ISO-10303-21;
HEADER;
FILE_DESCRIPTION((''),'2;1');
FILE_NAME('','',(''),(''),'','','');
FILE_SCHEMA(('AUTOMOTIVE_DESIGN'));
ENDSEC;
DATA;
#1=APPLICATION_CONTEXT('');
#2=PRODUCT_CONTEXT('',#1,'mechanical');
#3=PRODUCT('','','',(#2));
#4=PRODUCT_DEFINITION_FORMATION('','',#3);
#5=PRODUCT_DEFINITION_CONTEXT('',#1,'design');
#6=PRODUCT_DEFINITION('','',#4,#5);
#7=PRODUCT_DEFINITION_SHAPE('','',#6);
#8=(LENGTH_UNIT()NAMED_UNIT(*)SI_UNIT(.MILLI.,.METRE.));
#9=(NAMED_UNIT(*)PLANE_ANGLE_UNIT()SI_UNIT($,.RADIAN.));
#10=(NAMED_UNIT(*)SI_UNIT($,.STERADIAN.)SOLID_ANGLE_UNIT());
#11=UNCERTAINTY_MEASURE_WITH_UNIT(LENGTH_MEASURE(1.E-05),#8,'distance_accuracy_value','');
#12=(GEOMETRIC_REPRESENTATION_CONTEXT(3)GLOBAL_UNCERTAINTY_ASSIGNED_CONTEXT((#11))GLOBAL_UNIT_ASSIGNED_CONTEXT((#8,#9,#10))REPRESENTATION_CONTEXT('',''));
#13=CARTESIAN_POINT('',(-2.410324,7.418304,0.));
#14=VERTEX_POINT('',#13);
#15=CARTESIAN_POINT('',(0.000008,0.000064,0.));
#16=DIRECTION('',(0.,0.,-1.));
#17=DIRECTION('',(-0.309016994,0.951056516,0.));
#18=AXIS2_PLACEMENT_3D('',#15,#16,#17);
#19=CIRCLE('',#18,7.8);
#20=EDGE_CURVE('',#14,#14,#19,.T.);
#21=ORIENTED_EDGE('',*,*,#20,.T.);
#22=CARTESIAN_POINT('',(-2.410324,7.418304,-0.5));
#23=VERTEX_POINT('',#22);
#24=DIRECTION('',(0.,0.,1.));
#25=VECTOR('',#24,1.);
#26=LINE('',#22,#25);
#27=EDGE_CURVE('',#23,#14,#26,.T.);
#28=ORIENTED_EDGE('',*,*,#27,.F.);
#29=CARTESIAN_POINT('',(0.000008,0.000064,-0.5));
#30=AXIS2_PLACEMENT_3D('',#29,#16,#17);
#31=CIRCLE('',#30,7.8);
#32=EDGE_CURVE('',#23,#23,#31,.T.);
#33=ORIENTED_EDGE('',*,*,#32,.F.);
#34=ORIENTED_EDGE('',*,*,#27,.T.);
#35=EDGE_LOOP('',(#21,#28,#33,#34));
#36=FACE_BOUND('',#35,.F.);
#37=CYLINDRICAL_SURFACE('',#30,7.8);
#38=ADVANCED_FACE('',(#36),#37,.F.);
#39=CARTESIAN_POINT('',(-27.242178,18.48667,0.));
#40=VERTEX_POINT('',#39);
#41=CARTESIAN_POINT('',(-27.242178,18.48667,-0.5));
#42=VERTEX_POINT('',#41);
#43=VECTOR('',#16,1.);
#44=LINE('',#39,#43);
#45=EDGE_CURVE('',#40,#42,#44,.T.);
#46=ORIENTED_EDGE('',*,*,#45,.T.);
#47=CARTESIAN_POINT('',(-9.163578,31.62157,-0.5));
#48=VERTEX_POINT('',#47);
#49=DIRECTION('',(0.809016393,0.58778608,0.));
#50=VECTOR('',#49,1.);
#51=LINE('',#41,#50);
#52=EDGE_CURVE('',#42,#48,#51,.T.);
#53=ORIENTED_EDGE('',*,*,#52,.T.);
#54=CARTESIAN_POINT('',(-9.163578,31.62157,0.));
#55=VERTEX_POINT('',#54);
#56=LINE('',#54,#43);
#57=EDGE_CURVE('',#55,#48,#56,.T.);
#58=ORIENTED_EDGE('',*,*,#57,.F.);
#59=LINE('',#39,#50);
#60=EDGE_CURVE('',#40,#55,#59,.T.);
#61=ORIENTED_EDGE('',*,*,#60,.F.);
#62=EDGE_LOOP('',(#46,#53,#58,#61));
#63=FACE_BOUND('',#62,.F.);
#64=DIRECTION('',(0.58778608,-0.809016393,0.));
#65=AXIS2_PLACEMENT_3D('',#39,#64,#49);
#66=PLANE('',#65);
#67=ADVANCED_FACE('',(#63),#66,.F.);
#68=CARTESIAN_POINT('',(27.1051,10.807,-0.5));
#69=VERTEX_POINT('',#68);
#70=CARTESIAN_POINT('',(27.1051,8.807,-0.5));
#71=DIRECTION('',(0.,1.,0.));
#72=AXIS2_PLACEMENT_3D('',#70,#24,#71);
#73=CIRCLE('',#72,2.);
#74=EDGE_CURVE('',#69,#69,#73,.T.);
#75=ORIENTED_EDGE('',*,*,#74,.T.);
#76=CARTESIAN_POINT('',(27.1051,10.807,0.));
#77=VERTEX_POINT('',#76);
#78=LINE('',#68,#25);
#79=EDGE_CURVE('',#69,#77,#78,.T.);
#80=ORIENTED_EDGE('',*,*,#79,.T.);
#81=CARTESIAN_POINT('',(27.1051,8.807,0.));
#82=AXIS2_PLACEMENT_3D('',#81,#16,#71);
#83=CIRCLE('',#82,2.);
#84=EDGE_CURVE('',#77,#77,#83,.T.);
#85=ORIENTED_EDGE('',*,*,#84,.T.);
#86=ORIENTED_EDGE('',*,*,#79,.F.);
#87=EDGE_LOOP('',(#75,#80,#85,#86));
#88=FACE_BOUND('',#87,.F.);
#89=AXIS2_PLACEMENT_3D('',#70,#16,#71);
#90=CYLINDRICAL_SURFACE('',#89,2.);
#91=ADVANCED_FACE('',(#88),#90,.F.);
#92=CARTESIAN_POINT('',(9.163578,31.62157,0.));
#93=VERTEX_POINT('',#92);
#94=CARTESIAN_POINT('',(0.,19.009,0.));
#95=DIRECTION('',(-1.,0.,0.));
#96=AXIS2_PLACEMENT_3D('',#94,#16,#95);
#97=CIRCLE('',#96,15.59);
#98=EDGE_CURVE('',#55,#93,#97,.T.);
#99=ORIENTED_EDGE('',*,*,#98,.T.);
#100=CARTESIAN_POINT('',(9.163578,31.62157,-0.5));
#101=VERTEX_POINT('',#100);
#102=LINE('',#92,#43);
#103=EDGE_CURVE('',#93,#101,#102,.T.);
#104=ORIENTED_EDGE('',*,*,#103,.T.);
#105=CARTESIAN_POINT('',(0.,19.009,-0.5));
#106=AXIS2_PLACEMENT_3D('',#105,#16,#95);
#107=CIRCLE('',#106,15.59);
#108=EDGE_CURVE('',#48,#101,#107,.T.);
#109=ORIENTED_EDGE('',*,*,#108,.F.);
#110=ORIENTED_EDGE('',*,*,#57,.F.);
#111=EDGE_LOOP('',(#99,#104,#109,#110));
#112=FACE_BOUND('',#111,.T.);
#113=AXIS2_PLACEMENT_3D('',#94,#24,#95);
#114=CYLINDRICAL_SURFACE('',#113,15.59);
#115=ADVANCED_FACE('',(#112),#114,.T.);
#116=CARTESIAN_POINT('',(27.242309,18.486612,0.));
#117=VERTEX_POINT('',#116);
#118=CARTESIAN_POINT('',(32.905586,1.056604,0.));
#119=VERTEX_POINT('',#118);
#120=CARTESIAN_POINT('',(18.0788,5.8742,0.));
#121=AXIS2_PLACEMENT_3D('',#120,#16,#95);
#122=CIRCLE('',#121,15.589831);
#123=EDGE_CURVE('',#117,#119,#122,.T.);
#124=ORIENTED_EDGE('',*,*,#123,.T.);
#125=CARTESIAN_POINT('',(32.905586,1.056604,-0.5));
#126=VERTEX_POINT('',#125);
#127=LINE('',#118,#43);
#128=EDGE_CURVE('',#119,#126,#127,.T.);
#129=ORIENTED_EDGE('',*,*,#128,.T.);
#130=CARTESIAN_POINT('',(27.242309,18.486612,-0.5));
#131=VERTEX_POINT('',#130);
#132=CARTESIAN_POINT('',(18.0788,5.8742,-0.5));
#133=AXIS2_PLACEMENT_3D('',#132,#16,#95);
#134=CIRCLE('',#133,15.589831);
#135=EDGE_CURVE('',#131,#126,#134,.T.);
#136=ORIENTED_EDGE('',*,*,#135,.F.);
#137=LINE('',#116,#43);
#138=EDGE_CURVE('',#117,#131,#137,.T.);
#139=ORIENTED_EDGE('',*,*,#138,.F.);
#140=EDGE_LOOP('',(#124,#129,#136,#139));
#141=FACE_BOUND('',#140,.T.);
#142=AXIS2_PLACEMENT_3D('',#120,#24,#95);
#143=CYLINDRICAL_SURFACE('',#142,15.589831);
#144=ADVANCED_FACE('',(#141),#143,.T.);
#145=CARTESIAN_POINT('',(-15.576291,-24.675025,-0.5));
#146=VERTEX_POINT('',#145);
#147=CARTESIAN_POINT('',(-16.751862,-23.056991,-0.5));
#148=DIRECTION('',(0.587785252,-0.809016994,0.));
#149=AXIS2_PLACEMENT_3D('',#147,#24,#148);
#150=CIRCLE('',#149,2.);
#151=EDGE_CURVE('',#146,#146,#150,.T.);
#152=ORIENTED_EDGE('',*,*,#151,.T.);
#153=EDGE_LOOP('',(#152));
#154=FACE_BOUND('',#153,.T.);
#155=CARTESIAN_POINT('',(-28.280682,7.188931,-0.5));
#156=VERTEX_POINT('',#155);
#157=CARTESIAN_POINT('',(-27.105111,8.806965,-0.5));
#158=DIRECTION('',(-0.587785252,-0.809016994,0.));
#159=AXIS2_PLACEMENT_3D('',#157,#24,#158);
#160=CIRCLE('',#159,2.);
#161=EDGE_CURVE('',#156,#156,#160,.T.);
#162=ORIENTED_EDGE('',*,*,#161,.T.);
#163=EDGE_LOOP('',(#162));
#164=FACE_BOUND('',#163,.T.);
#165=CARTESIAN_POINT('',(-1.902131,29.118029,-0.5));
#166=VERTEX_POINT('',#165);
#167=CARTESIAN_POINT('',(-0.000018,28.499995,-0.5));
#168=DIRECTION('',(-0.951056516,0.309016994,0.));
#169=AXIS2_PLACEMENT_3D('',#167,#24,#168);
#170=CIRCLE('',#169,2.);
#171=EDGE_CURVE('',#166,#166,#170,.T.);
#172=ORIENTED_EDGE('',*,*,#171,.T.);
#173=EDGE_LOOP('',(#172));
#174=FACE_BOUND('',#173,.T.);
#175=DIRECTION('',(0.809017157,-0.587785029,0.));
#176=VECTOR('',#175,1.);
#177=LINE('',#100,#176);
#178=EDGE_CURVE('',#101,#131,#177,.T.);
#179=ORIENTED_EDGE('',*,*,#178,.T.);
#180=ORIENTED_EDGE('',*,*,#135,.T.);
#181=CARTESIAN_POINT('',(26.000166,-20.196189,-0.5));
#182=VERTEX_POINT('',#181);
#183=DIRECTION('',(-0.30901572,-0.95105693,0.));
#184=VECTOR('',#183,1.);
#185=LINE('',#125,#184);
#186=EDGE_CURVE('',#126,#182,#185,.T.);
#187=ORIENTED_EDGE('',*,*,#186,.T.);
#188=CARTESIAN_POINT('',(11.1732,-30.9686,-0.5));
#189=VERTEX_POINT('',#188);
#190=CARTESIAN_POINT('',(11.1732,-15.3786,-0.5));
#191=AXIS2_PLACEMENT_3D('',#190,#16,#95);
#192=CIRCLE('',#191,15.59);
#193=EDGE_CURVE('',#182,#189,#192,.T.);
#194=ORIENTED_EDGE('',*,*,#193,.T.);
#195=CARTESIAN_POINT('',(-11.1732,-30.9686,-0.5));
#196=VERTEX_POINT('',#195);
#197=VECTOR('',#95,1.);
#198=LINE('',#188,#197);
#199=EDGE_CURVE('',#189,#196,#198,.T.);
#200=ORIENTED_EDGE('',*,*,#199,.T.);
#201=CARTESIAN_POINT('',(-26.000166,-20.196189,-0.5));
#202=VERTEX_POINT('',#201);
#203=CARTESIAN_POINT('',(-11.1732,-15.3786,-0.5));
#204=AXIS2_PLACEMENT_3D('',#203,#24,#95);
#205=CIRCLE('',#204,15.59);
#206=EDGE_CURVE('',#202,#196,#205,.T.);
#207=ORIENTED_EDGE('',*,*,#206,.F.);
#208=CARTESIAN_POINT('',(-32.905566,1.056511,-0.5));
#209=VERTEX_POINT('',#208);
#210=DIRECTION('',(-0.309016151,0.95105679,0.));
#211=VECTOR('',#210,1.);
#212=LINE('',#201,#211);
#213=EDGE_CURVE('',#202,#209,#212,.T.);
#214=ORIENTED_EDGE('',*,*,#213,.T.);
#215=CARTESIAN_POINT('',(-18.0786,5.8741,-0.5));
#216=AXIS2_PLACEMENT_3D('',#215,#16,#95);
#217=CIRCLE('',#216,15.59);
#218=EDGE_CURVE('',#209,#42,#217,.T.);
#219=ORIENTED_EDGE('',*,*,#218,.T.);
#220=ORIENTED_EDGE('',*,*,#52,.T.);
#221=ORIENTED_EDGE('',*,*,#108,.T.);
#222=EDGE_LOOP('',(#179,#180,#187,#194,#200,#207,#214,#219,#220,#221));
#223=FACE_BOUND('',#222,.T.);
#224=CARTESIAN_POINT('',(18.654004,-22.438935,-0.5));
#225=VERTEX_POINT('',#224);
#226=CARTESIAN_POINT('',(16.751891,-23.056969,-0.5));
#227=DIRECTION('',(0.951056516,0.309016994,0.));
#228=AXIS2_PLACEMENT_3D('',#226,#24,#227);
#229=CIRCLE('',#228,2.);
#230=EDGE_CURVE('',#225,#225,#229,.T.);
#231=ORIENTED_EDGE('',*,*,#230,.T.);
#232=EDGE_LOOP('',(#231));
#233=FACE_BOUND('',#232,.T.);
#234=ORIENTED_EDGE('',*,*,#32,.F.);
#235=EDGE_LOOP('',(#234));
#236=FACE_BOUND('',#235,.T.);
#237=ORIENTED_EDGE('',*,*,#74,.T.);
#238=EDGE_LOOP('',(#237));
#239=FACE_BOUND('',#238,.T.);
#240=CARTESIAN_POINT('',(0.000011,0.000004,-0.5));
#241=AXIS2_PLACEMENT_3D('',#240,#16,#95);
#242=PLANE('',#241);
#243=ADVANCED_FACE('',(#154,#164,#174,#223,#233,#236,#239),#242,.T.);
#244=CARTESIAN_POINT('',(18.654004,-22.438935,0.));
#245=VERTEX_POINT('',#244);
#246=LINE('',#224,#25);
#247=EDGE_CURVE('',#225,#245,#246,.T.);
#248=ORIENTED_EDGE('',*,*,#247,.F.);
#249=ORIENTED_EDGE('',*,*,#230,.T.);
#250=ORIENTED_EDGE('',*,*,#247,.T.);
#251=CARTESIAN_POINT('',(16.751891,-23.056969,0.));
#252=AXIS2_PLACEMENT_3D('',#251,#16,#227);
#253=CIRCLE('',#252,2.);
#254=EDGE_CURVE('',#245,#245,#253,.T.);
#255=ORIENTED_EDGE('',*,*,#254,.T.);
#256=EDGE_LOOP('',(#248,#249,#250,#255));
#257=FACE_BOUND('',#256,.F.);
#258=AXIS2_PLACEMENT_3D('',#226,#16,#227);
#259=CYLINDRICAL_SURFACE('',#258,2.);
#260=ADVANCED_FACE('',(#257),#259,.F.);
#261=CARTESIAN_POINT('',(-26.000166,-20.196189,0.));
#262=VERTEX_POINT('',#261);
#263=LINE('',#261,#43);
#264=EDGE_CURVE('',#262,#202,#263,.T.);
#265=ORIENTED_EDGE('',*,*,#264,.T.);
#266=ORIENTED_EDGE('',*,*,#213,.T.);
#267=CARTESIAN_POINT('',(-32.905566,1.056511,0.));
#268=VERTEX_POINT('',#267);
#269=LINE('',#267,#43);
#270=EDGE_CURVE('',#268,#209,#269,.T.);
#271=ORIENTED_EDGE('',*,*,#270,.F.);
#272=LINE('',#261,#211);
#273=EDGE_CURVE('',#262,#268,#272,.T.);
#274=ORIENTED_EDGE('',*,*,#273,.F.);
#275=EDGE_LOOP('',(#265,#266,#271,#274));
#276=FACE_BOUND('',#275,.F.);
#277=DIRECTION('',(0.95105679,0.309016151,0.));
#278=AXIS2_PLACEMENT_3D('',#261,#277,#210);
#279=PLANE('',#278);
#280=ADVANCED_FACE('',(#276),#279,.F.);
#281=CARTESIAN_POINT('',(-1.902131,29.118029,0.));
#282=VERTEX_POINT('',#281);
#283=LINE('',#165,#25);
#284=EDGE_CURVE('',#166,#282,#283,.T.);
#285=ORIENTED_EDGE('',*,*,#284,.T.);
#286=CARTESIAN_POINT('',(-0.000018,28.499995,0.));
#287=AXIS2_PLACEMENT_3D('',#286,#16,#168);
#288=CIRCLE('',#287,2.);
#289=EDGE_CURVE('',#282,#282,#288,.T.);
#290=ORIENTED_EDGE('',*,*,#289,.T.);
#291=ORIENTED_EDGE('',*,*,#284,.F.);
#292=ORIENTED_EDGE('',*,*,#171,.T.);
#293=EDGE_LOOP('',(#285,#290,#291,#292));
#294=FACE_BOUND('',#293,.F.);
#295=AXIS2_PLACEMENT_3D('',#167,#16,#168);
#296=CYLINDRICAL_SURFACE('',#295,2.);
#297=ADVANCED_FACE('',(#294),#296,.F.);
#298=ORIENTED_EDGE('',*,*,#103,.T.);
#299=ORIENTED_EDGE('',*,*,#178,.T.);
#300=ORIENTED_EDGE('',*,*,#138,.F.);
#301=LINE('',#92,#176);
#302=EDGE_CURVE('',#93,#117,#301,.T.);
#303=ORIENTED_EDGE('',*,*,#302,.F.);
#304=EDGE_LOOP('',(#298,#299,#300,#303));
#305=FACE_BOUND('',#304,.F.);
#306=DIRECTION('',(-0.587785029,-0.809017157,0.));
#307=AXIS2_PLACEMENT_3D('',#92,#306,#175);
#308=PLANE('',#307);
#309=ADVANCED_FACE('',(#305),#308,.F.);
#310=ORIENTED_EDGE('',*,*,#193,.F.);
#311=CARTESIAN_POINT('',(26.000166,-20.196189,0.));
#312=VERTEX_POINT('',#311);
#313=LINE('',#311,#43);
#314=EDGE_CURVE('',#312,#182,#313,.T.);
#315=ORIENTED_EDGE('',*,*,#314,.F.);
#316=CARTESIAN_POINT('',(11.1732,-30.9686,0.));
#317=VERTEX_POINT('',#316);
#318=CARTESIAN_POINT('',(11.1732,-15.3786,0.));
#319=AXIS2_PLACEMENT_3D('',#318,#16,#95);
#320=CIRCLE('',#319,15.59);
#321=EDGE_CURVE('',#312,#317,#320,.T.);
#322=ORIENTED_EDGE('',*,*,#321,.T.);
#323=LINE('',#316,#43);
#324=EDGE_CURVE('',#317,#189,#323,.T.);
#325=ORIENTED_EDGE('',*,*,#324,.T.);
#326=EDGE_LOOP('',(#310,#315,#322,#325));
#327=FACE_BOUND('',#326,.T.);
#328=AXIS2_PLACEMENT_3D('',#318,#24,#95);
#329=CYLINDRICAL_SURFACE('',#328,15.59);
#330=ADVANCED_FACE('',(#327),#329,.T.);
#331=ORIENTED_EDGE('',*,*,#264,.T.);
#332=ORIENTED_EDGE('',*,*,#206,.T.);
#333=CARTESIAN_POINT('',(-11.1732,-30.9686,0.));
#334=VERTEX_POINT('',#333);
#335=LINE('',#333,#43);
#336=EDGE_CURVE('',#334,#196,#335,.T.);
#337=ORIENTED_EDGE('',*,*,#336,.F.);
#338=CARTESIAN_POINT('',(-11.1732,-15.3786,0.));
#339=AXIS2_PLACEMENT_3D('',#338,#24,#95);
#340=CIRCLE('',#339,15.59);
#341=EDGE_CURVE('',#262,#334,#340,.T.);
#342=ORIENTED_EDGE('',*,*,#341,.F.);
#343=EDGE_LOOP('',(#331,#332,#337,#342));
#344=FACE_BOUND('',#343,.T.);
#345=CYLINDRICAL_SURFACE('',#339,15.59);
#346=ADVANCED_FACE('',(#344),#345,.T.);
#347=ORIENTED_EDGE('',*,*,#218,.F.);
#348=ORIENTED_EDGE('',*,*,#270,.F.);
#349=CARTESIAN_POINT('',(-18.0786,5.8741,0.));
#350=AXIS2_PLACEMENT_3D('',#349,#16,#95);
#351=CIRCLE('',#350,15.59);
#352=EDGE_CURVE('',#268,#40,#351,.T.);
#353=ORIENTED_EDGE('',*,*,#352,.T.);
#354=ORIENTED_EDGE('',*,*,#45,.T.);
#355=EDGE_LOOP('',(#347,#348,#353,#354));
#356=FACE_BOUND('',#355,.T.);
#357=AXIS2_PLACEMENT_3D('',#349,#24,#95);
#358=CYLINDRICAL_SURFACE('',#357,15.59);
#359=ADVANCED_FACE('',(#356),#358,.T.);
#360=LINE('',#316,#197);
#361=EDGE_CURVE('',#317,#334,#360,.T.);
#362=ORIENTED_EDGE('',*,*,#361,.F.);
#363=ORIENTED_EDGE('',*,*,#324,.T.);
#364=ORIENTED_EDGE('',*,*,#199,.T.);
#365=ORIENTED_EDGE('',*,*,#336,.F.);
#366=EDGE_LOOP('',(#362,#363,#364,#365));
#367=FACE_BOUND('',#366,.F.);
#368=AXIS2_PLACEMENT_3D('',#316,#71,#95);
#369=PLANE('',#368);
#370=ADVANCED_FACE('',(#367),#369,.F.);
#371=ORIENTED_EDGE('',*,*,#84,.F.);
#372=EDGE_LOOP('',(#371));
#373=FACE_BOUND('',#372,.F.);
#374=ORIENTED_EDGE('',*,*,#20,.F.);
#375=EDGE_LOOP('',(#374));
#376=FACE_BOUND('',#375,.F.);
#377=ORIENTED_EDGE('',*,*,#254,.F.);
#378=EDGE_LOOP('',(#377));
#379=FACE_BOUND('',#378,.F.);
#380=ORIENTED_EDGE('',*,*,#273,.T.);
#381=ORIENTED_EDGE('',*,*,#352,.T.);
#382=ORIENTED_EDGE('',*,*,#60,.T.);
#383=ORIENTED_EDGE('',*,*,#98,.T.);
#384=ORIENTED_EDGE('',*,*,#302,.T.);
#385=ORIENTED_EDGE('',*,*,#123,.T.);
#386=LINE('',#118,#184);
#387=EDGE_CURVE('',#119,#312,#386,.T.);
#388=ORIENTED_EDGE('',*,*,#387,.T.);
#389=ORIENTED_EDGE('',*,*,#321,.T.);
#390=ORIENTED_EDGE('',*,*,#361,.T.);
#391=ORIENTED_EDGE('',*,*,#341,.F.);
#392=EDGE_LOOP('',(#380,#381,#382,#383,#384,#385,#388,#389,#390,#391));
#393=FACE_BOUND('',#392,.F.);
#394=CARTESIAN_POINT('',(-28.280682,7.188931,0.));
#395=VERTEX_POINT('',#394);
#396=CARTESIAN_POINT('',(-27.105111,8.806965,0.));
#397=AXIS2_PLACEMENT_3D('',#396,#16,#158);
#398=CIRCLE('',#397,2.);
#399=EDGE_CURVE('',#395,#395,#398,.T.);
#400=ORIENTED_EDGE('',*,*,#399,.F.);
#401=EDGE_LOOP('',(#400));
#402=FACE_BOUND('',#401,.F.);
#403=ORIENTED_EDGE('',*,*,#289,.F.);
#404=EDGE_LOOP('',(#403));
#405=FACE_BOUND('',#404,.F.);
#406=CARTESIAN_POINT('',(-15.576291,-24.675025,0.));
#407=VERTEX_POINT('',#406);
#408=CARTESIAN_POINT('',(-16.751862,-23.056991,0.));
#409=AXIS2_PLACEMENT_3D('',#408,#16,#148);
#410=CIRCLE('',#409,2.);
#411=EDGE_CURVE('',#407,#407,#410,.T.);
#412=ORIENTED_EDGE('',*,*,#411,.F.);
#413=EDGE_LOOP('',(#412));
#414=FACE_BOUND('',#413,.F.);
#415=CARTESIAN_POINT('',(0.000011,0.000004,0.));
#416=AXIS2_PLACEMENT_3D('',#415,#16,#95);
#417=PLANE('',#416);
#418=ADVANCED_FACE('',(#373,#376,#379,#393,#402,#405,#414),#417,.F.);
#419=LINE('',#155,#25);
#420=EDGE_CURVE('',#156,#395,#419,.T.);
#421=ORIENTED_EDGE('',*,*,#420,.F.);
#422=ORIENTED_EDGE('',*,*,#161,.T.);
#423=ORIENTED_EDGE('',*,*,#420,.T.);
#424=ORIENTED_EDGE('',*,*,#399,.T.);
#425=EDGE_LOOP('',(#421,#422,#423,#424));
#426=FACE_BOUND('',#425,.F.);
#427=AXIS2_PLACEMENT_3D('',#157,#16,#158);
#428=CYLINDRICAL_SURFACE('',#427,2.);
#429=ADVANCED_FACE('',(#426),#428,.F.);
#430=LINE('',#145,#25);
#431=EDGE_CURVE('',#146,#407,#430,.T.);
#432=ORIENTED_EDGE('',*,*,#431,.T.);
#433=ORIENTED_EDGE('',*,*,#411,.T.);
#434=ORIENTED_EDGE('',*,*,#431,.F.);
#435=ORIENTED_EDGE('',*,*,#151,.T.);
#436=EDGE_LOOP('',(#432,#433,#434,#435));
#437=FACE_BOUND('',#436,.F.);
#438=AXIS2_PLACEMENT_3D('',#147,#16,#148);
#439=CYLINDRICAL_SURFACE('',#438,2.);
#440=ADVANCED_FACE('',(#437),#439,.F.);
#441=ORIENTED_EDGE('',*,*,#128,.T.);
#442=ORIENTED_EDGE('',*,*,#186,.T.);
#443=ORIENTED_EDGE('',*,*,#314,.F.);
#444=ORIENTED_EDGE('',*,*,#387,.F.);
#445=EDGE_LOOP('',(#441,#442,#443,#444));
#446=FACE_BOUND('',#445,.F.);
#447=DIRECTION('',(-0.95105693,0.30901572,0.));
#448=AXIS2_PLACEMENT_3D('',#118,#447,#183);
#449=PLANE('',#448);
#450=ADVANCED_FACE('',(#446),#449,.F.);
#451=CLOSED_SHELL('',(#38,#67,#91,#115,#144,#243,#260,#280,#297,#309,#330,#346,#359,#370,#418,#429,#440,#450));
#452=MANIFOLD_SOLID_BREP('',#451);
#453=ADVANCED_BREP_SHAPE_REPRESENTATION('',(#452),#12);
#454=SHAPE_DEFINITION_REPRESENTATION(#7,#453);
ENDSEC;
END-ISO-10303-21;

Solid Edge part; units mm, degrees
sketch "Sketch1" plane through (0, 0, 0) normal (0, 0, -1) x (-1, 0, 0)
  line L0 (-9.1636, 31.6216) -> (-27.2423, 18.4866)
  arc A0 (-27.2423, 18.4866) -> (-32.9056, 1.0566) centre (-18.0788, 5.8742) ccw
  line L1 (-32.9056, 1.0566) -> (-26.0002, -20.1962)
  arc A1 (-26.0002, -20.1962) -> (-11.1732, -30.9686) centre (-11.1732, -15.3786) ccw
  line L2 (-11.1732, -30.9686) -> (11.1732, -30.9686)
  arc A2 (26.0002, -20.1962) -> (11.1732, -30.9686) centre (11.1732, -15.3786) cw
  line L3 (26.0002, -20.1962) -> (32.9056, 1.0565)
  arc A3 (32.9056, 1.0565) -> (27.2422, 18.4867) centre (18.0786, 5.8741) ccw
  line L4 (27.2422, 18.4867) -> (9.1636, 31.6216)
  arc A4 (9.1636, 31.6216) -> (-9.1636, 31.6216) centre (0, 19.009) ccw
extrude "Protrusion1" add sketch "Sketch1" along normal blind 0.5
hole "Furat_1" at (27.1051, 8.807, -0.5) direction (0, 0, 1) diameter 4 end through all
pattern_circular "MintaElőfordulás_1" count 5 over 360 about axis through (0, 0, -0.5) along (0, 0, 1) of "Furat_1"
sketch "Sketch2" plane through (0, 1.8152, -0.5) normal (0, 0, -1) x (-0.309017, 0.9510565, 0)
  circle A0 centre (-1.7263, -0.5609) radius 7.8
extrude "Kivágás_1" cut sketch "Sketch2" against normal blind 32.365
properties material "Szilikon"
